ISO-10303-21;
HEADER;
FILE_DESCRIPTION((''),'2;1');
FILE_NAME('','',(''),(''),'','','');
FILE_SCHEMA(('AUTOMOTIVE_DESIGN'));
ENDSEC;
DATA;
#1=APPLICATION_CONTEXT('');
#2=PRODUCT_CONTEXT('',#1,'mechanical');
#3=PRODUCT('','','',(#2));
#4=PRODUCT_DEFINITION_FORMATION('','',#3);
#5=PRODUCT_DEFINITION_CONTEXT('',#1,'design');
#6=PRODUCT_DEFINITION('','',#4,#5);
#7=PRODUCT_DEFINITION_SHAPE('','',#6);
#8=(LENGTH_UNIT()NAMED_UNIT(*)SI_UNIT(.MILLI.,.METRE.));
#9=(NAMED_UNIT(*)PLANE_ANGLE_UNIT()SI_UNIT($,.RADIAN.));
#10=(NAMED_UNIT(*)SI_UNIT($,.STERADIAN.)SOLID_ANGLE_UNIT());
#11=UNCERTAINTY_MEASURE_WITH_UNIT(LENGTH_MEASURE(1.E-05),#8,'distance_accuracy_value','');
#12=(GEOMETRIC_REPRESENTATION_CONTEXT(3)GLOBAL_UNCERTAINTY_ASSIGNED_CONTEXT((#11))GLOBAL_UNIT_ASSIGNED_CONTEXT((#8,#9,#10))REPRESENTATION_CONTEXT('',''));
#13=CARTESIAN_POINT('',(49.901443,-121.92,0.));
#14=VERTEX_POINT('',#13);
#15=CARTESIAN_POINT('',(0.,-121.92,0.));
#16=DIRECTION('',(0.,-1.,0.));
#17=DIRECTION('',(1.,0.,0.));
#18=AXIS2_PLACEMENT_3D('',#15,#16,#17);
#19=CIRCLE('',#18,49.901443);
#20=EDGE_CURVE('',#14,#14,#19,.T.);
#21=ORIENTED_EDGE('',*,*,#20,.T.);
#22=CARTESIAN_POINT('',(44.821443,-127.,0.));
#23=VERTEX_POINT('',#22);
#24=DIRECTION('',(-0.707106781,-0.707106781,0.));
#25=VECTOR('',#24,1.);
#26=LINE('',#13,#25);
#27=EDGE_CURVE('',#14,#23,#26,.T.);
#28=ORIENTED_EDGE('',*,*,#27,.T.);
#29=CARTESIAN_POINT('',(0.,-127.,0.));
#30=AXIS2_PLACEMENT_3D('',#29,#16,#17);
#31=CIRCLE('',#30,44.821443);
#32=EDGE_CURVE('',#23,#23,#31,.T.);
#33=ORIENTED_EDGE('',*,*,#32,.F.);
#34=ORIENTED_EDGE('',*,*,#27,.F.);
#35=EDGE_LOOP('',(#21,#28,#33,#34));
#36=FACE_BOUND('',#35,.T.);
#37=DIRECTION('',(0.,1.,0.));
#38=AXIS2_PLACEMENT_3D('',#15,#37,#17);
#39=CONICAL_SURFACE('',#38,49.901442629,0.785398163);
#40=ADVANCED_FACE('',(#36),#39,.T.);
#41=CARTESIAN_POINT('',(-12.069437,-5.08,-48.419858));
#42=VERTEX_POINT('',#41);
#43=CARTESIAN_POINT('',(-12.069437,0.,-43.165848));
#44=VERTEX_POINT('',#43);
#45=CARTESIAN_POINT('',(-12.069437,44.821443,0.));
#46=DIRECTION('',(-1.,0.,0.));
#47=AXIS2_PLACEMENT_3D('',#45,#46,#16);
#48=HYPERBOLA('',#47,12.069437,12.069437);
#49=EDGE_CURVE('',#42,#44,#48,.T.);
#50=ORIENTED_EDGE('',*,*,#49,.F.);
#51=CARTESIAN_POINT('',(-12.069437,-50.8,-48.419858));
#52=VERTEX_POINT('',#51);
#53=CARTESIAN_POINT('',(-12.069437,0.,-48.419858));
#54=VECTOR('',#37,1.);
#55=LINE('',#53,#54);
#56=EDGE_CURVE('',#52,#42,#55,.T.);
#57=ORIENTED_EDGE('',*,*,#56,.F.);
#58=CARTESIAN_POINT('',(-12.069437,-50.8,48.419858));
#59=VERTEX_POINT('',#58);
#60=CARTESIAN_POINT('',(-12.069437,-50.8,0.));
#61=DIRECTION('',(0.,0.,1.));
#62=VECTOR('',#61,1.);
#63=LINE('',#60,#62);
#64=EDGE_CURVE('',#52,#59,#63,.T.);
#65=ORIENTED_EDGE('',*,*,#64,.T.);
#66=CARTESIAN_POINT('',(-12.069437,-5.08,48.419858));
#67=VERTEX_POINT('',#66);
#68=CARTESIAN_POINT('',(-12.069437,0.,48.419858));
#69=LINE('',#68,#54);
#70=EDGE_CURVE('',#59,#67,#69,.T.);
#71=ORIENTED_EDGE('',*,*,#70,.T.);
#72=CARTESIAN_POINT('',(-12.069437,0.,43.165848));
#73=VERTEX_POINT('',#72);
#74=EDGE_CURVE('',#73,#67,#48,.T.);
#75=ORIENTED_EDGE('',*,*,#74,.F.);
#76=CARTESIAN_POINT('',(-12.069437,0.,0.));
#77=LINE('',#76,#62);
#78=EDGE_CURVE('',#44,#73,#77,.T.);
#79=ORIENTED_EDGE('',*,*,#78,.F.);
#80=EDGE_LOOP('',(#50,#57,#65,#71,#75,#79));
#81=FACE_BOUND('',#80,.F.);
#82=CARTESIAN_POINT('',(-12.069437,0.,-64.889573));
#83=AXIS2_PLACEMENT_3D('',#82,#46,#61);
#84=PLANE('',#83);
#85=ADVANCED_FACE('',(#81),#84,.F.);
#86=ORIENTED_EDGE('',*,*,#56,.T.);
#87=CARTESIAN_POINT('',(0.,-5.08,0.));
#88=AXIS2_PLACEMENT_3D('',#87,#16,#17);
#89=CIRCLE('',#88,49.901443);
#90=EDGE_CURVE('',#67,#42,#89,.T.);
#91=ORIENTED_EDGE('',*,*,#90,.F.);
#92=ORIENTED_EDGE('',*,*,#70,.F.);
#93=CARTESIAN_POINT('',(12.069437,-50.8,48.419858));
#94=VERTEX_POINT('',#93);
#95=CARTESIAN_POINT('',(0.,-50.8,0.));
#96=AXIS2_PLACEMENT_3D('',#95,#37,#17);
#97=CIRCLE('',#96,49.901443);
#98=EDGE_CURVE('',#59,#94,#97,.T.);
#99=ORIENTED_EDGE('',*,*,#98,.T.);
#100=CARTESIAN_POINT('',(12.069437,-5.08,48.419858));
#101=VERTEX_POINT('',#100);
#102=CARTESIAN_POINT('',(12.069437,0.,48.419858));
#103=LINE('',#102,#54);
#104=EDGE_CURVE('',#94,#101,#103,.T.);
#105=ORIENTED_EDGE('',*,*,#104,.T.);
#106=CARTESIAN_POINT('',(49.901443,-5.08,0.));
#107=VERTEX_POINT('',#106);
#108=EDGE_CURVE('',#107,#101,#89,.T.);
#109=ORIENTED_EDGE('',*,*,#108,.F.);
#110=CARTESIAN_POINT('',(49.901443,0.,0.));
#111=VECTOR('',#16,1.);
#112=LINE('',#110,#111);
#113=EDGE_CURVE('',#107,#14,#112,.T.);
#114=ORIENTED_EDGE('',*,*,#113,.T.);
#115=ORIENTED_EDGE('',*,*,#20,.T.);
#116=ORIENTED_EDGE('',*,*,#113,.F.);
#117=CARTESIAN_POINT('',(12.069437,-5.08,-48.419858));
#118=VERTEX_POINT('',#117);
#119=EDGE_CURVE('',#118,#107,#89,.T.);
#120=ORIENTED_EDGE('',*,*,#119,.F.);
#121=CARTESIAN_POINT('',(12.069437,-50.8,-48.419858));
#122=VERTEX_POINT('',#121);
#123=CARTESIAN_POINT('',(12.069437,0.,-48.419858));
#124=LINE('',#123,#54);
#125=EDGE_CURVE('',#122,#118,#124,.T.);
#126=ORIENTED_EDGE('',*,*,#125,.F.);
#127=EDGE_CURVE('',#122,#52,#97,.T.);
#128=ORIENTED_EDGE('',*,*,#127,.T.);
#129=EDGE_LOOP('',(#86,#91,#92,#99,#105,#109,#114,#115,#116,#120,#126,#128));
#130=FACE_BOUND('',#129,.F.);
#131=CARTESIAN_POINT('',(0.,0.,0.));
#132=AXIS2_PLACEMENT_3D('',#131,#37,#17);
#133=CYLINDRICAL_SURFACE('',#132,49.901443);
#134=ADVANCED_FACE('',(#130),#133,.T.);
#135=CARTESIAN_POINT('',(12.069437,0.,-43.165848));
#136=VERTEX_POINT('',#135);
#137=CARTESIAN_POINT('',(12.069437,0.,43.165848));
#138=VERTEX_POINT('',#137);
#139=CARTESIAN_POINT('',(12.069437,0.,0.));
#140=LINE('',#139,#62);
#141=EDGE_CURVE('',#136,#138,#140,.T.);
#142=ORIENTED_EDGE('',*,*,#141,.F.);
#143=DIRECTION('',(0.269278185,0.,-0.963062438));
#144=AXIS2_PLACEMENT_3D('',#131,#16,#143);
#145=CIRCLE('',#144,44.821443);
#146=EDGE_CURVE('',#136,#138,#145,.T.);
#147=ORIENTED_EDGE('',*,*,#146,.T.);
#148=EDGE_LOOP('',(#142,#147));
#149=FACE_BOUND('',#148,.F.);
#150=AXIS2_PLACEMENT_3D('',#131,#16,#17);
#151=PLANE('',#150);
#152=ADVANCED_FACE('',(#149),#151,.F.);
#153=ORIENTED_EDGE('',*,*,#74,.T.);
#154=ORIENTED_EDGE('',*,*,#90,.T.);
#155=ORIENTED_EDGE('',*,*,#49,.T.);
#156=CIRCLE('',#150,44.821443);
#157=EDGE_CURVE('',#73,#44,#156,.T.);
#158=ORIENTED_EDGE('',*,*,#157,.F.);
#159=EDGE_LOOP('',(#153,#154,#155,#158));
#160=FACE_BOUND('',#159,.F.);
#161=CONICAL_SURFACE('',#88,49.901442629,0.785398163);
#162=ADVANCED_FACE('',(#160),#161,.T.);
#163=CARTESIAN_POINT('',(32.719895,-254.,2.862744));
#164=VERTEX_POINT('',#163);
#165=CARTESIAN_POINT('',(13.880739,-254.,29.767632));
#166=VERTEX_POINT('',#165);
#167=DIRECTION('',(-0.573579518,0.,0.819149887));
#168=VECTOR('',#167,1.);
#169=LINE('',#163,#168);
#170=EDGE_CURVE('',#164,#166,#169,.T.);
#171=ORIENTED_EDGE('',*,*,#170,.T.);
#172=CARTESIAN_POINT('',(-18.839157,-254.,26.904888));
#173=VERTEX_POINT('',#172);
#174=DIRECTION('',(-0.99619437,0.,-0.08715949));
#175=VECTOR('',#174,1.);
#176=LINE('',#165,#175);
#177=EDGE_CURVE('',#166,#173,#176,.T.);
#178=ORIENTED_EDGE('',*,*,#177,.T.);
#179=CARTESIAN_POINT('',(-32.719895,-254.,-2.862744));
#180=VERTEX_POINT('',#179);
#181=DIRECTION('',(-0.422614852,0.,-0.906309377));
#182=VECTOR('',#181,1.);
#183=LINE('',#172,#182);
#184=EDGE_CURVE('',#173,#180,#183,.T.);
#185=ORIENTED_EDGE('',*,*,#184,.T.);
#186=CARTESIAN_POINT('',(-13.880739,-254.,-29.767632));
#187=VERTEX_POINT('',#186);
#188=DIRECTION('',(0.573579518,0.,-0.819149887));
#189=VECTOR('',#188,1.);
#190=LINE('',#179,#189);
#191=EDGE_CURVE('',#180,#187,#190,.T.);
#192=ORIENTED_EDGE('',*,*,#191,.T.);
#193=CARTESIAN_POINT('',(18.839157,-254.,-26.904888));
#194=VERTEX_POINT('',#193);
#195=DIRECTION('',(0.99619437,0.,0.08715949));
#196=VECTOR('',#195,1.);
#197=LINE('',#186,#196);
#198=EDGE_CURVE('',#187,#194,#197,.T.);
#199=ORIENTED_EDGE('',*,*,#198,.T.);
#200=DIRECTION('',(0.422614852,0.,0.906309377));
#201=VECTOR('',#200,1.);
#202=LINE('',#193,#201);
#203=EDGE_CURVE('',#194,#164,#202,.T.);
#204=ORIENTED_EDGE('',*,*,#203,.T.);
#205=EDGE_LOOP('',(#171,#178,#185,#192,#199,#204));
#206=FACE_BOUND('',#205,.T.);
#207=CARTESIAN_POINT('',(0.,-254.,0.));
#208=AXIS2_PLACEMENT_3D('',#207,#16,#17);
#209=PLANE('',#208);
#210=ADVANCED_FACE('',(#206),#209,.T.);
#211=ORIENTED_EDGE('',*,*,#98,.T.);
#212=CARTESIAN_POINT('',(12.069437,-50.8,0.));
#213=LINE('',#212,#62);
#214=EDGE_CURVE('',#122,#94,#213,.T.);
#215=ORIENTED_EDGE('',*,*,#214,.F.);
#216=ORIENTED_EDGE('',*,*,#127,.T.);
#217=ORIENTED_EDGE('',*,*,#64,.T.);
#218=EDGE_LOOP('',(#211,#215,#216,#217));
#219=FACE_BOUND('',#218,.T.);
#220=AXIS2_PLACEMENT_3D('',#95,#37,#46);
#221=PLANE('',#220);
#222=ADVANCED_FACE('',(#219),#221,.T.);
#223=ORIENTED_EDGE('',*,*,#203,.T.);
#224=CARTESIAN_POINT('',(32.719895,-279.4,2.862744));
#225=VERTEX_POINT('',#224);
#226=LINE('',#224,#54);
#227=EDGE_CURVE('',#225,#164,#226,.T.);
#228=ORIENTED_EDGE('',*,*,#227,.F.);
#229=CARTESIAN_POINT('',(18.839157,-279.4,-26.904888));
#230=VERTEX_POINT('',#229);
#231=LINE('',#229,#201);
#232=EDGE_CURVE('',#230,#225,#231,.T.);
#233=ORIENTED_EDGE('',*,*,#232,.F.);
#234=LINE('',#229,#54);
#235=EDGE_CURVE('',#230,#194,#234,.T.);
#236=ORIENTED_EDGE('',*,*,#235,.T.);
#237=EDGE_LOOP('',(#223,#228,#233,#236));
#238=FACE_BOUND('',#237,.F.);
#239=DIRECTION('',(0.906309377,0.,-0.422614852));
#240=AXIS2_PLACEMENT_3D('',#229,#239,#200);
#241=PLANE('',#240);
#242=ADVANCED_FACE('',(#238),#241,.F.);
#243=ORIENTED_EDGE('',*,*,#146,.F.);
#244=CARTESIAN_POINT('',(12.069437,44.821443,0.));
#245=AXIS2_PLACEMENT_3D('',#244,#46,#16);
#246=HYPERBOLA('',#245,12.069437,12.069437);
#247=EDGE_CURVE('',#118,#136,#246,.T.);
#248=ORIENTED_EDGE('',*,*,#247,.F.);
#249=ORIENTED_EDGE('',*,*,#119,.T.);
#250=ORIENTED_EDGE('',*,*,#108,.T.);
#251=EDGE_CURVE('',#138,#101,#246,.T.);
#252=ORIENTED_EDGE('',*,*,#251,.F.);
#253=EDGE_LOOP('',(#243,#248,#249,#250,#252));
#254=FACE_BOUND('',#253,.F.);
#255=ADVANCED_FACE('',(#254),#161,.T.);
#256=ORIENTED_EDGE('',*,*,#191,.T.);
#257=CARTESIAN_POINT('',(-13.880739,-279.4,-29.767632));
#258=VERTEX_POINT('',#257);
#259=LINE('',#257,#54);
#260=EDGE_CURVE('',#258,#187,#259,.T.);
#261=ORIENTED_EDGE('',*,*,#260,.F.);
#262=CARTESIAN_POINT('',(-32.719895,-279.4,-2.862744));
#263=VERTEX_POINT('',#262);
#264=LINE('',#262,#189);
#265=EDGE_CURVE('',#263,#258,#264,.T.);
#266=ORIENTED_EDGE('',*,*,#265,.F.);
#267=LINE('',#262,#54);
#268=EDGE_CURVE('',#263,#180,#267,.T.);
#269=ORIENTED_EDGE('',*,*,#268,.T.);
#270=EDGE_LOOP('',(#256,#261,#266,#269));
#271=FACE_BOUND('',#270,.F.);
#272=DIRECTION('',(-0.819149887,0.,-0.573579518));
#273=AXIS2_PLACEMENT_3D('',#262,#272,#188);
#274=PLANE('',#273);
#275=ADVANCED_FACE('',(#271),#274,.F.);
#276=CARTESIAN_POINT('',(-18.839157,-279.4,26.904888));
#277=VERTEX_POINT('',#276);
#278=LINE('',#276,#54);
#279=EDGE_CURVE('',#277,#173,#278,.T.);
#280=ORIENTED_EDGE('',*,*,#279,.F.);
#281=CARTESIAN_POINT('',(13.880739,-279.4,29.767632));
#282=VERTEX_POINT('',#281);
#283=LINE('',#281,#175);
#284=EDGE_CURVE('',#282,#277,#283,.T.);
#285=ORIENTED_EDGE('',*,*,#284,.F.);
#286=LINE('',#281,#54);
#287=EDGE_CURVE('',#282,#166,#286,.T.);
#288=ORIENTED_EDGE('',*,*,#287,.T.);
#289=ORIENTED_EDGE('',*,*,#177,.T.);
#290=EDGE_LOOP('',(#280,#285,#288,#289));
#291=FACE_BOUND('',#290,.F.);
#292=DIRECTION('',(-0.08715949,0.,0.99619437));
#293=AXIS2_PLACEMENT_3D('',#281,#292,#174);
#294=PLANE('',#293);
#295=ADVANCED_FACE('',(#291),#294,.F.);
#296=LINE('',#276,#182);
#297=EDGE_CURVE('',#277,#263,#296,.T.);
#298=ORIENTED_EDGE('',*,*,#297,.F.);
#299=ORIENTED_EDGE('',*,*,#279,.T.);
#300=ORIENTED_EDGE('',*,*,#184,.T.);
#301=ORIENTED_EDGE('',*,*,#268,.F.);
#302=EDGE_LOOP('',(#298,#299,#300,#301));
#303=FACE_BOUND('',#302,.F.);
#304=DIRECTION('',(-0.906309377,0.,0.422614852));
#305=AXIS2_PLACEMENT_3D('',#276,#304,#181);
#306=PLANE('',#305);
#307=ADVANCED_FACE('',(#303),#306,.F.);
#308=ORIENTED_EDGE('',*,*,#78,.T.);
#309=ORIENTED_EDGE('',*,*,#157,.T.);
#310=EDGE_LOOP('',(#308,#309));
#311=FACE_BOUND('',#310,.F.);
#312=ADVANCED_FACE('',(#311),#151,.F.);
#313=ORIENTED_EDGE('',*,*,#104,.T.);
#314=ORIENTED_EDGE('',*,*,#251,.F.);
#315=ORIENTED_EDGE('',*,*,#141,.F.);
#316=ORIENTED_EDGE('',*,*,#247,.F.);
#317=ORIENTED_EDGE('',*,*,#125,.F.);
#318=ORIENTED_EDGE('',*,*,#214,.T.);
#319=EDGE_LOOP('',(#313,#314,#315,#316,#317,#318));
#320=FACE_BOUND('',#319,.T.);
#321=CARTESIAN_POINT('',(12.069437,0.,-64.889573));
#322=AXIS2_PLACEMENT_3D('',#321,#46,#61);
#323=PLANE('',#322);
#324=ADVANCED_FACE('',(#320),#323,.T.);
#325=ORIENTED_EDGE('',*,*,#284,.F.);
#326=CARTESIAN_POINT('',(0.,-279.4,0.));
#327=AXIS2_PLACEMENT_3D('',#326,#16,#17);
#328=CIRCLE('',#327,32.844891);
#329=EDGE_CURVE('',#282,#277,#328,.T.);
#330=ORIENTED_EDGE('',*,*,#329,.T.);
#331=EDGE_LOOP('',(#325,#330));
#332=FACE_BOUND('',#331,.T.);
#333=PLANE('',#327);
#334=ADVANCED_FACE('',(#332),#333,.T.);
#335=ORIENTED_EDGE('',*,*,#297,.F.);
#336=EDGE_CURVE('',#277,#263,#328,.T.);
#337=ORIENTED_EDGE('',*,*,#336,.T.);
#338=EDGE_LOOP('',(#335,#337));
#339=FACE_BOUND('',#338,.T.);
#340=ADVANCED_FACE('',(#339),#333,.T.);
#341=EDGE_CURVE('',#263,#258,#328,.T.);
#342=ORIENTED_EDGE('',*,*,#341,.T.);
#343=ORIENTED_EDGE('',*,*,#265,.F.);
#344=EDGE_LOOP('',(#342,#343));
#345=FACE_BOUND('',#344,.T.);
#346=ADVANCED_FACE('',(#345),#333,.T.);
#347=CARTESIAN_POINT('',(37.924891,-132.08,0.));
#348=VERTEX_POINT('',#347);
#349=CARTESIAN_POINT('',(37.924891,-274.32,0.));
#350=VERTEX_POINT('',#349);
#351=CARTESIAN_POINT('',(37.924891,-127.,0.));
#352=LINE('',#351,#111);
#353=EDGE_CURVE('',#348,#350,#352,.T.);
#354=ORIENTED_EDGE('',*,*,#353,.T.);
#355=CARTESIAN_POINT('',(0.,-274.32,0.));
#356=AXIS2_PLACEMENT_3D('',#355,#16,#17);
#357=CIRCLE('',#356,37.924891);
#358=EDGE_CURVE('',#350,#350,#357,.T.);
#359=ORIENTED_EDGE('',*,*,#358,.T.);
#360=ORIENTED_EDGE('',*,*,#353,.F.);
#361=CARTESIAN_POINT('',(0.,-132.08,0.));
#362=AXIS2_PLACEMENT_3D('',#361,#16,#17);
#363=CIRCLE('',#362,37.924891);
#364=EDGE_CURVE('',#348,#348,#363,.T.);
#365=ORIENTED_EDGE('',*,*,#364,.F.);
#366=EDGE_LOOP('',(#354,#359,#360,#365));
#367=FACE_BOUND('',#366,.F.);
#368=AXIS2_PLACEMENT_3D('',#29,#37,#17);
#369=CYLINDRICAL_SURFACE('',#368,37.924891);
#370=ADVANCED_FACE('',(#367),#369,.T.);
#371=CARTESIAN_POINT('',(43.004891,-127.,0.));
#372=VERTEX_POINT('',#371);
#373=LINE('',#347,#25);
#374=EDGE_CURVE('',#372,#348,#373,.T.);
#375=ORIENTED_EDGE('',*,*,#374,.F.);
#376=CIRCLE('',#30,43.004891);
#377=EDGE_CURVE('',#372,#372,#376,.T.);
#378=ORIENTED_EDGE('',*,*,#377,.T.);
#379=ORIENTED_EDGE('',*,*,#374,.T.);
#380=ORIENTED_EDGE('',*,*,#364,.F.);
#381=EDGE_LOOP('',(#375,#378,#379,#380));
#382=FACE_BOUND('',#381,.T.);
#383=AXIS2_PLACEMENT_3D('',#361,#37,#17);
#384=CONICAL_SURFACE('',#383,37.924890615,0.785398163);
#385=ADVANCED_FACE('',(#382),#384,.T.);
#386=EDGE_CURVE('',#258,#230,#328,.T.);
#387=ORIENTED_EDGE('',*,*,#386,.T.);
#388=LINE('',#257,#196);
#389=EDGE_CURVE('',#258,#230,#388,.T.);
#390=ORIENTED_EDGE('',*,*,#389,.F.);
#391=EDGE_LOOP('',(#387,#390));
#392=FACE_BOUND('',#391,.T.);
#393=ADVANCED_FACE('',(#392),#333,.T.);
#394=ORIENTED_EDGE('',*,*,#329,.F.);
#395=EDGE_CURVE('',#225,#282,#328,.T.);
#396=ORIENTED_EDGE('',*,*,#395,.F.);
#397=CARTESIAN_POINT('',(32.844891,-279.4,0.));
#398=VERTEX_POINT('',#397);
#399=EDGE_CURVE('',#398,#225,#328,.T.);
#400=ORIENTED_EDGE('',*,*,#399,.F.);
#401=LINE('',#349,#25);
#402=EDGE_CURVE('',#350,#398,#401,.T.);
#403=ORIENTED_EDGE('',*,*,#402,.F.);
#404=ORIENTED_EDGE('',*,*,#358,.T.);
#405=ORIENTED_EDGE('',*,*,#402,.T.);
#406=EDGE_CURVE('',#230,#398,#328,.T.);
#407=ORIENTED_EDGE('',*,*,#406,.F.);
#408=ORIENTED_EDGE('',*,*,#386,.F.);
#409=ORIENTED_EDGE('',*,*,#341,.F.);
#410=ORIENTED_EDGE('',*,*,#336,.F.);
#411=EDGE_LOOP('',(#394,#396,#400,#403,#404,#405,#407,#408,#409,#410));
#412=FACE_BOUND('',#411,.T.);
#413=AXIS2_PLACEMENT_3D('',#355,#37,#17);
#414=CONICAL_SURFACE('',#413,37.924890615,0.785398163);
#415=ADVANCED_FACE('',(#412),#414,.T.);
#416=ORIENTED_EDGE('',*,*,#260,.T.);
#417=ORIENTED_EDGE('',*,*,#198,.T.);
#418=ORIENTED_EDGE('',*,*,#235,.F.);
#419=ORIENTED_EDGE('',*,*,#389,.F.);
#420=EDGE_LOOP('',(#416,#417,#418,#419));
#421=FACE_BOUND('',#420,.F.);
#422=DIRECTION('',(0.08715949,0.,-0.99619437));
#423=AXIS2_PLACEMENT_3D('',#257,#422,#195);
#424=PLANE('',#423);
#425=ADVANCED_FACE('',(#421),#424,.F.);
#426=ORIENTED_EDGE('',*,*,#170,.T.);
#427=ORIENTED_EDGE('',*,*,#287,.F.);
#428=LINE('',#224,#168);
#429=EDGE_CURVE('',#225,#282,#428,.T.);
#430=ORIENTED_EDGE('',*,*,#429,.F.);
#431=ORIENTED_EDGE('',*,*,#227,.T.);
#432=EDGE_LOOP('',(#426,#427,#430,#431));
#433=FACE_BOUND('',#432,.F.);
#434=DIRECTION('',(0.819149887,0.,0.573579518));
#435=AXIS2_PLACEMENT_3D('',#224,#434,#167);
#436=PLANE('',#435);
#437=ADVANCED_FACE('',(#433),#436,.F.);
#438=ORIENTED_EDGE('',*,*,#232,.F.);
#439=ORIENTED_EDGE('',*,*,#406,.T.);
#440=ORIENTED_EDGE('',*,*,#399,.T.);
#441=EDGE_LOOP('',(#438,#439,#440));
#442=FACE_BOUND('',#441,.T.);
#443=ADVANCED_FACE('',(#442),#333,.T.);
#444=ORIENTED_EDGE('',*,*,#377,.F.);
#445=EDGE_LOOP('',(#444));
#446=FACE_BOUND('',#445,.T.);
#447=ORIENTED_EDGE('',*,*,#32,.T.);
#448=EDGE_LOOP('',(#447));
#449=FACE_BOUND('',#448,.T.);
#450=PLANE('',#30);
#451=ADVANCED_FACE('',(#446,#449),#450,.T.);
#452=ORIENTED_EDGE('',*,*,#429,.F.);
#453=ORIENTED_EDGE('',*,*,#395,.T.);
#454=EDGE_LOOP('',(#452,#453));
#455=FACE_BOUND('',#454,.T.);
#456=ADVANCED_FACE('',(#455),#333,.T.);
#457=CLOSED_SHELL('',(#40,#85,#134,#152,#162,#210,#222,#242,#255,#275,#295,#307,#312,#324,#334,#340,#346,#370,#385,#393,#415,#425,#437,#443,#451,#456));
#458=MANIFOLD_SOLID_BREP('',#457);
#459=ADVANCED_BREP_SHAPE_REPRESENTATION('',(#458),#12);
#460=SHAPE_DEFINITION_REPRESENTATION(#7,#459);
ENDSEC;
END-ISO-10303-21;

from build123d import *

# Parameters (mm, degrees)
F0_R      = 49.9014426293
F1_DEPTH  = 127
F2_R      = 37.9248906149
F3_DEPTH  = 152.4
F4_SIZE   = 5.08
F6_DEPTH  = 25.4
F9_W      = 24.138873443
F9_H      = 129.7791451216
F10_DEPTH = 50.8


# Not quite as in the source:
# - the program builds the solid bodies; features that only make, move or delete a surface that nothing else refers to are left out


with BuildPart() as f1:
    # F0 (on Front) → F1 (new body)
    with BuildSketch(Plane.XZ):
        Circle(F0_R)
    extrude(amount=F1_DEPTH)

    # F2 (on face) → F3 (join)
    with BuildSketch(Plane.XZ.offset(127)):
        Circle(F2_R)
    extrude(amount=F3_DEPTH)

    # F4
    f4_edges = [f1.edges().sort_by_distance(p)[0] for p in [
        (-49.901443, -127, 0),
        (-37.924891, -127, 0),
        (-37.924891, -279.4, 0),
        (-49.901443, 0, 0),
    ]]
    chamfer(f4_edges, length=F4_SIZE)

    # F5 (on face) → F6 (cut)
    with BuildSketch(Plane.XZ.offset(279.4)):
        Polygon((-13.8807385989, -29.7676323455), (18.8391565222, -26.9048884227), (32.7198951211, 2.8627439228), (13.8807385989, 29.7676323455), (-18.8391565222, 26.9048884227), (-32.7198951211, -2.8627439228), align=None)
    extrude(amount=-F6_DEPTH, mode=Mode.SUBTRACT)

    # F9 (on face) → F10 (cut)
    with BuildSketch(Plane(origin=(0, 0, 0), x_dir=(-1, 0, 0), z_dir=(0, 1, 0))):
        Rectangle(F9_W, F9_H)
    extrude(amount=-F10_DEPTH, mode=Mode.SUBTRACT)


solid = f1.part
